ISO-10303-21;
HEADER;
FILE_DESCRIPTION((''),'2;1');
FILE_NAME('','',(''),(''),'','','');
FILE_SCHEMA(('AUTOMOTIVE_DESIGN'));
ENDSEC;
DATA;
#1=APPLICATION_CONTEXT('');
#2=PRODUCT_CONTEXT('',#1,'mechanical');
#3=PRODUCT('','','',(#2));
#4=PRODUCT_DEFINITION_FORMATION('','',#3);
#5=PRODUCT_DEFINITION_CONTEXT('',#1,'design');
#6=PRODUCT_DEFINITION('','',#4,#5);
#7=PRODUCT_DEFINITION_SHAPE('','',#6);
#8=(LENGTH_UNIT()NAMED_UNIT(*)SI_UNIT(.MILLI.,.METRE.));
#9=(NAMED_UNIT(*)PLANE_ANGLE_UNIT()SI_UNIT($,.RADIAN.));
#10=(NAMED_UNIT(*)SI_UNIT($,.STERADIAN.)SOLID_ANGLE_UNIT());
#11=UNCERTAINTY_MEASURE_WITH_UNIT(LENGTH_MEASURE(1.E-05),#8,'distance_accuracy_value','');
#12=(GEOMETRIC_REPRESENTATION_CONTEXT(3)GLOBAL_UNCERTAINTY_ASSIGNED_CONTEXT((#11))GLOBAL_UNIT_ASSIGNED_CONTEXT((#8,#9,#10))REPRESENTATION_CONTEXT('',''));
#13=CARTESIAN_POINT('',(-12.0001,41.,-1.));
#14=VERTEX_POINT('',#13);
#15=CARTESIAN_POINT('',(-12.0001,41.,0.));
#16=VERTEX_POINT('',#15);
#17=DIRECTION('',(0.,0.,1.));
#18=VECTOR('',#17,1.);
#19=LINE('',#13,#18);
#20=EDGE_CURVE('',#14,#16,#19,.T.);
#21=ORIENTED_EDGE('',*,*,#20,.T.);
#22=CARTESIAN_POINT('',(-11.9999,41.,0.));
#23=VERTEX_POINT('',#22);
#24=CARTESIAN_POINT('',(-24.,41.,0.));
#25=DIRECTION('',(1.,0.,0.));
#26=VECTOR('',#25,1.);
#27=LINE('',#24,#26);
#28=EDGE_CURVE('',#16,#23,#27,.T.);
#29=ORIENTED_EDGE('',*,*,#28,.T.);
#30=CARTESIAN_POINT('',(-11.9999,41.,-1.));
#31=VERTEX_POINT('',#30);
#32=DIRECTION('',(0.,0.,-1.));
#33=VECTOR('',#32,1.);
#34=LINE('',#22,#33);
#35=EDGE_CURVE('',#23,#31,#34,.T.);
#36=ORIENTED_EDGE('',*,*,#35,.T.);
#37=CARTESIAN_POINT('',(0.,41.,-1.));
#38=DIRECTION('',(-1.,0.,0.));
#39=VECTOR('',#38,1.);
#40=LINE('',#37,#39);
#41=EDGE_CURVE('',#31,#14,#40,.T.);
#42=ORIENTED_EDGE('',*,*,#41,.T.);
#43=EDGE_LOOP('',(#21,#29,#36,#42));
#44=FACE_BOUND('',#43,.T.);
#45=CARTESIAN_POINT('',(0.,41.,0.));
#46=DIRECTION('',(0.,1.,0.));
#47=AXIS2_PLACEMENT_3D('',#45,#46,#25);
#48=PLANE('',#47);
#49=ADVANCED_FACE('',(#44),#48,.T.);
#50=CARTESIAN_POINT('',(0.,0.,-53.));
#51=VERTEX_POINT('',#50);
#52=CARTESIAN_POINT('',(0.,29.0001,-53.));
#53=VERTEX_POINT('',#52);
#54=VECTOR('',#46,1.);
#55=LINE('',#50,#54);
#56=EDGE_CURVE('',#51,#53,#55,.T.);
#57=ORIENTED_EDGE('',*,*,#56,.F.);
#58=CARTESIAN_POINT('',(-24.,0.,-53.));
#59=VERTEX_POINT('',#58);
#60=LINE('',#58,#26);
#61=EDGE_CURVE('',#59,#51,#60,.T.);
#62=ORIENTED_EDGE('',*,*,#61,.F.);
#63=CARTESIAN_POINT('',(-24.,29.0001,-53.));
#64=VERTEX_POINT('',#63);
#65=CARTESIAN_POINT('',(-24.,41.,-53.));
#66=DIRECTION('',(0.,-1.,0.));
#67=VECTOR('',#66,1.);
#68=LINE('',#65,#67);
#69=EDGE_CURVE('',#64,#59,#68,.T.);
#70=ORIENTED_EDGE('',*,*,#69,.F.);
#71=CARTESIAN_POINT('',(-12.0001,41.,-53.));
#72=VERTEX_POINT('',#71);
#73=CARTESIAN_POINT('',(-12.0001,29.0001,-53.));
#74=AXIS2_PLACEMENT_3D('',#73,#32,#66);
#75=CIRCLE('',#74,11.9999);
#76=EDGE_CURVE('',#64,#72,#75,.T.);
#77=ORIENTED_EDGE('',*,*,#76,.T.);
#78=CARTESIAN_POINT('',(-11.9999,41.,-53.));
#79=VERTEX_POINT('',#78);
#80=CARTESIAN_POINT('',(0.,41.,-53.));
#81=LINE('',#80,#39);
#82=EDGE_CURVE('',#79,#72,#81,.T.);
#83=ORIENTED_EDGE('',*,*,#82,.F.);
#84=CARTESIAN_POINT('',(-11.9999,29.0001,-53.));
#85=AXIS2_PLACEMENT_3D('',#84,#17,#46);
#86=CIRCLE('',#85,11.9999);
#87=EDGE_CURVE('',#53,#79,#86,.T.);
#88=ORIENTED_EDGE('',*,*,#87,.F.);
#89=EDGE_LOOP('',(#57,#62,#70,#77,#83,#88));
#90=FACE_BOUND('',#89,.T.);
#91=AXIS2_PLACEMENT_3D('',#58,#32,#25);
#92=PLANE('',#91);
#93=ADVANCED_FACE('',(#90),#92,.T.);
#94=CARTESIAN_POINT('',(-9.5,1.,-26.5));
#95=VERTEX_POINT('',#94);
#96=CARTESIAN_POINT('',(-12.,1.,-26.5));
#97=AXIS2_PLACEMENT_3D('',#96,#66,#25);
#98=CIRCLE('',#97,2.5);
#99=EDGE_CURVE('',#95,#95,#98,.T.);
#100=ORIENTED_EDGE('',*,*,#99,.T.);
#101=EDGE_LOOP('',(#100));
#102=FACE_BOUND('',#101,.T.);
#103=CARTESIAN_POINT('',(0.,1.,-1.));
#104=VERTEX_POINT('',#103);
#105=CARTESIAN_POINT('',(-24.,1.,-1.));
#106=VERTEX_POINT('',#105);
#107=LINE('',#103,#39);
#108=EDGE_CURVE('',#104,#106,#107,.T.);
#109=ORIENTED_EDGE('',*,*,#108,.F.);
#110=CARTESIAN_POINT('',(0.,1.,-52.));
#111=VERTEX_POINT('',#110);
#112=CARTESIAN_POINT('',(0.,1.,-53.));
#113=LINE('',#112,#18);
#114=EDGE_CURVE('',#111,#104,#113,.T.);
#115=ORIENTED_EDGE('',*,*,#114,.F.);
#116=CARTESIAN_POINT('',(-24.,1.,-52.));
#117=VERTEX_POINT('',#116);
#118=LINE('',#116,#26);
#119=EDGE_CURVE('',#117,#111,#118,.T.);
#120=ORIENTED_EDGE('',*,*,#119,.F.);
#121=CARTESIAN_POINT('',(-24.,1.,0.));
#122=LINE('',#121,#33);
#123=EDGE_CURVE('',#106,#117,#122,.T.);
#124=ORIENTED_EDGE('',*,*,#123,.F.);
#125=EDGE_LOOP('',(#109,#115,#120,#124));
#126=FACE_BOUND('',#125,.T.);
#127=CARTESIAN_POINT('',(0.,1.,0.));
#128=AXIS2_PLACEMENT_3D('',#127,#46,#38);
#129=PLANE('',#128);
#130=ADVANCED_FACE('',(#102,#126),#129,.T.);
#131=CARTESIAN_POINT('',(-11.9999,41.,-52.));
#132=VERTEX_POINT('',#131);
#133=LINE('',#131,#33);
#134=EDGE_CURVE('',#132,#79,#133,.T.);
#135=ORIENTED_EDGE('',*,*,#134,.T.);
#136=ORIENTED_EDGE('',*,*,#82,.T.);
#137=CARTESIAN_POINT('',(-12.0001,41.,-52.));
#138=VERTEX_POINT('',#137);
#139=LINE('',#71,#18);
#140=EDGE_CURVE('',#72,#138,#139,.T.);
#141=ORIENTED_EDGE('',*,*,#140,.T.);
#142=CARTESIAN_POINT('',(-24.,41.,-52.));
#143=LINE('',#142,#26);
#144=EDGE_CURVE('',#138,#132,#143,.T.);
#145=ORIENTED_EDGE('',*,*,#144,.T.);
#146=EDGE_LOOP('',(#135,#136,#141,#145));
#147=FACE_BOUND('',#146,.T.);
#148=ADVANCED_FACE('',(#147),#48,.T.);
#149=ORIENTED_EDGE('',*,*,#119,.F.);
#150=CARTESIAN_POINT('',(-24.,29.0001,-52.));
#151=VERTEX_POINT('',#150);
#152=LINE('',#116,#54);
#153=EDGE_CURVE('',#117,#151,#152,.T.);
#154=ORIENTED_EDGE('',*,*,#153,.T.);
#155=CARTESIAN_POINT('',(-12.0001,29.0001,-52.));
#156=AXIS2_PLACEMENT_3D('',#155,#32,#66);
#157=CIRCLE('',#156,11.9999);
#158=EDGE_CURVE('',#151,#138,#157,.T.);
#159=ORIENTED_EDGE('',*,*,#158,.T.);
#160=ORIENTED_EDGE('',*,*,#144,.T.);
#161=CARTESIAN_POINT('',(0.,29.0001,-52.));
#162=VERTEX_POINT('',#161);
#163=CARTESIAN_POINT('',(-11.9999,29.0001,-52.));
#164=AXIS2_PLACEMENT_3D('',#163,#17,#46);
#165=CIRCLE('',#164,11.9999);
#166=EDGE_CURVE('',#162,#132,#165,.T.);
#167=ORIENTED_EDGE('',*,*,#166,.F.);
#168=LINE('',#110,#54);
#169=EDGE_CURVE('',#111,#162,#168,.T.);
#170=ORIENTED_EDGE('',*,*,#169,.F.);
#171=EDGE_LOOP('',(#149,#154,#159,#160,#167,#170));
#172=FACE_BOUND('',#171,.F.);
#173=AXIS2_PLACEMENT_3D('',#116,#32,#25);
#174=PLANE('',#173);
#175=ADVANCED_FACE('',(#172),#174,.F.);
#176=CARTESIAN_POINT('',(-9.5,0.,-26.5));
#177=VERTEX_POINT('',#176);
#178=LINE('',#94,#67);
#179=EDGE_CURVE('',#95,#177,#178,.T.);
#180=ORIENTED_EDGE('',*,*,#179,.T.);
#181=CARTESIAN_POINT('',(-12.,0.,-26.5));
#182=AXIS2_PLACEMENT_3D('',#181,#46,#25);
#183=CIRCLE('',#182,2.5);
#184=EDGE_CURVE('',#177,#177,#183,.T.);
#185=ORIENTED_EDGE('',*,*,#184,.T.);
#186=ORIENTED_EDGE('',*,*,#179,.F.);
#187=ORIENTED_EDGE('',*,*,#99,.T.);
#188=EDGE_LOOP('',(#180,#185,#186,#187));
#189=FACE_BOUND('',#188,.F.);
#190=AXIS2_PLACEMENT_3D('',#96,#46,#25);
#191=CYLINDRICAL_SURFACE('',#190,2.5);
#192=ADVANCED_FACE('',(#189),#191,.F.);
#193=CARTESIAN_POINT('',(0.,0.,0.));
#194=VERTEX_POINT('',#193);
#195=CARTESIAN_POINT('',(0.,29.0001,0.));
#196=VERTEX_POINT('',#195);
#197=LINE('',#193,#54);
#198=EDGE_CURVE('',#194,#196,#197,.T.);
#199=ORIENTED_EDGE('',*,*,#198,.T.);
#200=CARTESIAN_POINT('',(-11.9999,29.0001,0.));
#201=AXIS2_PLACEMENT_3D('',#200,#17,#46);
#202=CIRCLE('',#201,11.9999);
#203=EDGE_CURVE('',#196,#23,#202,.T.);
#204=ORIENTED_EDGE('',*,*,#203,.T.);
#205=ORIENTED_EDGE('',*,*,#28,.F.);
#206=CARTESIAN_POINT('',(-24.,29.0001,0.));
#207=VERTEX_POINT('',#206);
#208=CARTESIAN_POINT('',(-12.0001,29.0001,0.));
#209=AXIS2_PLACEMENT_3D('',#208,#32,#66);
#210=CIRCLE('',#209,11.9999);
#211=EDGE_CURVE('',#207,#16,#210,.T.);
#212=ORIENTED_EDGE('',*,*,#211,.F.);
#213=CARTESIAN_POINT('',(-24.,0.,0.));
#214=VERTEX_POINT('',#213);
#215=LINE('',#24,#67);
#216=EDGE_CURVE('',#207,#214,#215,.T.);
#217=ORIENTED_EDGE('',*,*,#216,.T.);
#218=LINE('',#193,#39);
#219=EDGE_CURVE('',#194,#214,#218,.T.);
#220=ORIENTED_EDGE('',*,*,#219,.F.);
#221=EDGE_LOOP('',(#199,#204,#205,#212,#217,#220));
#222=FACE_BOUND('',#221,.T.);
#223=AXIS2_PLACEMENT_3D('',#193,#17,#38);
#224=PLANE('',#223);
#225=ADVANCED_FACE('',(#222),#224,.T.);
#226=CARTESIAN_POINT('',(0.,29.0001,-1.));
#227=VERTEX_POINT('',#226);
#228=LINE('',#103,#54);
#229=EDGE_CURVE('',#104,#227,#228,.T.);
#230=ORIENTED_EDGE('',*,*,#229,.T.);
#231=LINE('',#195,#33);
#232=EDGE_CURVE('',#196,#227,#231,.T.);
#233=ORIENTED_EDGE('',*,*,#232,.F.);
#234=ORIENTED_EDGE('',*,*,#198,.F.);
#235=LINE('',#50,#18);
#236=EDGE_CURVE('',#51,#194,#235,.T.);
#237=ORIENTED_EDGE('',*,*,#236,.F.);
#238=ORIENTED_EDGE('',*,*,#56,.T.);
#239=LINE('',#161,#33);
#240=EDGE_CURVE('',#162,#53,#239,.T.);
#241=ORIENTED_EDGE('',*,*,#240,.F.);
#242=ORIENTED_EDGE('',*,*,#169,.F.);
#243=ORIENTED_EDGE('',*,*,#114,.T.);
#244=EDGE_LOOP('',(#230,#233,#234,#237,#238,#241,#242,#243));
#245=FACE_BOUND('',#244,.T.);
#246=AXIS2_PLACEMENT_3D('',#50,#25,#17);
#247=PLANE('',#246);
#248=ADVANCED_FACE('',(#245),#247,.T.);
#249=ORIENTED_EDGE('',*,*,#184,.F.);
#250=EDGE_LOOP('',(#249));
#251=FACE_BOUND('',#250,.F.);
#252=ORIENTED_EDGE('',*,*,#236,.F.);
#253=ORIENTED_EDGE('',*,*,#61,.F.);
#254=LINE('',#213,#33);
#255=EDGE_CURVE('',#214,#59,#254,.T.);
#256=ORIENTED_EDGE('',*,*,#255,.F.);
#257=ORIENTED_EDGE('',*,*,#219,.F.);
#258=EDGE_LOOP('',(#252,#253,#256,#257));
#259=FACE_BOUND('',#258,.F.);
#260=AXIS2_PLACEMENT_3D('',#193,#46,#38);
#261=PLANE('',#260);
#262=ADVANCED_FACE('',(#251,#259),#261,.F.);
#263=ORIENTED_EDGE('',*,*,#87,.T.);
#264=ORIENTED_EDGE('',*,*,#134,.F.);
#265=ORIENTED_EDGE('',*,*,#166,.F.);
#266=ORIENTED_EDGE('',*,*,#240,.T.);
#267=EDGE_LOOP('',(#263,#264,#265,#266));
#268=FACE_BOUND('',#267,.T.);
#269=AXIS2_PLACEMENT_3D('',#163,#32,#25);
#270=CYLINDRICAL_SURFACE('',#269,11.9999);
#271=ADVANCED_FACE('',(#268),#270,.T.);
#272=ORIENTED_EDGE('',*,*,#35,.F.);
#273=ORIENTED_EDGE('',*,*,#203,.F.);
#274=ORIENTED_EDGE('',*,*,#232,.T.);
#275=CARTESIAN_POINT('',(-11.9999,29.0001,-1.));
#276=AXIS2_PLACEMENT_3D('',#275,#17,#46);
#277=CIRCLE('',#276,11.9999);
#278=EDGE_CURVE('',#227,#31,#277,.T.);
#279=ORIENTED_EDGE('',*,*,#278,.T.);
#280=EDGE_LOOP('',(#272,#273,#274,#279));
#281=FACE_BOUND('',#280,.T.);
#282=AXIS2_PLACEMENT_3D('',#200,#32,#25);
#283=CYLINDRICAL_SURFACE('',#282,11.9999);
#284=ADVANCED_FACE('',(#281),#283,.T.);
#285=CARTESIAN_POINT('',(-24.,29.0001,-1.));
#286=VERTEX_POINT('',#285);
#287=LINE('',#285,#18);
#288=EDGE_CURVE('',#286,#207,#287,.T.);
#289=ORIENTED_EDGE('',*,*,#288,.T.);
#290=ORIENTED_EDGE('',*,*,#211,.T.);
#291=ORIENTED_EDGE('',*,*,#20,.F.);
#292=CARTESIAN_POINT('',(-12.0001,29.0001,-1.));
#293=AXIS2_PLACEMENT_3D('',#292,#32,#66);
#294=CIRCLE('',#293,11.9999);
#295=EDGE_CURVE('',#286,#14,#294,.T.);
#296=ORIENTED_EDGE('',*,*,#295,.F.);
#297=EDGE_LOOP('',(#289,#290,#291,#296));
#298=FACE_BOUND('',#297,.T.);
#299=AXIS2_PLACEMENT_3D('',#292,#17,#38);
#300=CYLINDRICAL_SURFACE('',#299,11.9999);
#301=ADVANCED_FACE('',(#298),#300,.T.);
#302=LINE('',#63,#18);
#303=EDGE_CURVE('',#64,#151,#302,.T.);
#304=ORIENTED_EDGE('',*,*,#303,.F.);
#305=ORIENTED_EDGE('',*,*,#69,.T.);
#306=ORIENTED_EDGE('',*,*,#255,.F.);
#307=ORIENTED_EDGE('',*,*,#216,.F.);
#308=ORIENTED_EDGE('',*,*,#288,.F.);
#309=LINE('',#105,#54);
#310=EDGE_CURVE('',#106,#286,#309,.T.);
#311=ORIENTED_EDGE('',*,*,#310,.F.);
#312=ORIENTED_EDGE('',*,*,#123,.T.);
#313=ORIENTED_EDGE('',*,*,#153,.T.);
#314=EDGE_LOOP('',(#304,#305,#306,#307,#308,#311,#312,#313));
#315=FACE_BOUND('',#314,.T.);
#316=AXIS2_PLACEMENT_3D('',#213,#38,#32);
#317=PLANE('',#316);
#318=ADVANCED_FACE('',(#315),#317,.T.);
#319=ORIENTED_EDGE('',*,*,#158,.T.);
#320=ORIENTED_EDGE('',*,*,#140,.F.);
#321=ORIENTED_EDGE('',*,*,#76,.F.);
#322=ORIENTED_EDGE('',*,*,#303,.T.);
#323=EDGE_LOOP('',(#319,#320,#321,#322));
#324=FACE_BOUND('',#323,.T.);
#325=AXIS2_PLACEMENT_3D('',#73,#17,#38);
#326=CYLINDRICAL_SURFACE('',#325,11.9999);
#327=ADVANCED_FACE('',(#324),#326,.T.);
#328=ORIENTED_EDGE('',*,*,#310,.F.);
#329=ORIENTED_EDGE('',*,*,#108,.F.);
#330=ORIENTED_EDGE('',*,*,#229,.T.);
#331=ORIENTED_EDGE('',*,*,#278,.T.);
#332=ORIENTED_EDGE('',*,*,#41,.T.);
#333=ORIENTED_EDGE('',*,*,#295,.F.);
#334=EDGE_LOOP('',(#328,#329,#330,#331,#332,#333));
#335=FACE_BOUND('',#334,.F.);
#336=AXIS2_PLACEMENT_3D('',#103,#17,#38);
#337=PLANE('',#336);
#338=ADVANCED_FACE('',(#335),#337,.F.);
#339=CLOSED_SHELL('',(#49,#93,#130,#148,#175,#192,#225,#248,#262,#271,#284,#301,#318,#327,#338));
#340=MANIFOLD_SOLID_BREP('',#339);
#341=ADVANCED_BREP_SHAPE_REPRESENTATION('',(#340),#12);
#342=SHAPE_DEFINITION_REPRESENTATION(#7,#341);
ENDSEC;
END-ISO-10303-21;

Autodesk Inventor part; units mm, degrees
ref_plane "YZ Plane" through (0, 0, 0) normal (1, 0, 0) x (0, 1, 0)
ref_plane "XZ Plane" through (0, 0, 0) normal (0, 1, 0) x (-1, 0, 0)
ref_plane "XY Plane" through (0, 0, 0) normal (0, 0, 1) x (1, 0, 0)
sketch "Sketch1" plane through (0, 0, 0) normal (0, 1, 0) x (-1, 0, 0)
  line L0 (0, 0) -> (24, 0)
  line L1 (24, 0) -> (24, -53)
  line L2 (24, -53) -> (0, -53)
  line L3 (0, -53) -> (0, 0)
  dimension "d0" = 24
  dimension "d1" = 53
extrude "Extrusion1" add sketch "Sketch1" along normal blind 1
sketch "Sketch2" plane through (0, 1, 0) normal (0, 1, 0) x (1, 0, 0)
  line L0 (-24, 0) -> (0, 0) projected
  line L1 (0, 0) -> (0, 53) projected
  line L2 (-24, 53) -> (-24, 0) projected
  line L3 (-24, 0) -> (0, 0)
  line L4 (0, 0) -> (0, 1)
  line L5 (0, 1) -> (-24, 1)
  line L6 (-24, 1) -> (-24, 0)
  line L7 (0, 53) -> (-24, 53)
  line L8 (-24, 53) -> (-24, 52)
  line L9 (-24, 52) -> (0, 52)
  line L10 (0, 52) -> (0, 53)
  dimension "d4" = 1
  dimension "d5" = 1
extrude "Extrusion2" add sketch "Sketch2" along normal blind 40 contours L2 L5 L1 L0 | L2 L7 L1 L9
fillet "Fillet1" radius 12 4 edges at (0, 41, -52.5) (-24, 41, -52.5) (0, 41, -0.5) (-24, 41, -0.5)
sketch "Sketch3" plane through (0, 1, 0) normal (0, 1, 0) x (1, 0, 0)
  line L0 (0, 1) -> (0, 52) projected
  line L1 (-24, 52) -> (-24, 1) projected
  line L2 (-24, 26.5) -> (0, 26.5)
  circle A0 centre (-12, 26.5) radius 2.5
  point P0 (0, 0)
  dimension "d9" = 5
extrude "Extrusion3" cut sketch "Sketch3" against normal blind 40
properties part number "Wrist U-Plate"
